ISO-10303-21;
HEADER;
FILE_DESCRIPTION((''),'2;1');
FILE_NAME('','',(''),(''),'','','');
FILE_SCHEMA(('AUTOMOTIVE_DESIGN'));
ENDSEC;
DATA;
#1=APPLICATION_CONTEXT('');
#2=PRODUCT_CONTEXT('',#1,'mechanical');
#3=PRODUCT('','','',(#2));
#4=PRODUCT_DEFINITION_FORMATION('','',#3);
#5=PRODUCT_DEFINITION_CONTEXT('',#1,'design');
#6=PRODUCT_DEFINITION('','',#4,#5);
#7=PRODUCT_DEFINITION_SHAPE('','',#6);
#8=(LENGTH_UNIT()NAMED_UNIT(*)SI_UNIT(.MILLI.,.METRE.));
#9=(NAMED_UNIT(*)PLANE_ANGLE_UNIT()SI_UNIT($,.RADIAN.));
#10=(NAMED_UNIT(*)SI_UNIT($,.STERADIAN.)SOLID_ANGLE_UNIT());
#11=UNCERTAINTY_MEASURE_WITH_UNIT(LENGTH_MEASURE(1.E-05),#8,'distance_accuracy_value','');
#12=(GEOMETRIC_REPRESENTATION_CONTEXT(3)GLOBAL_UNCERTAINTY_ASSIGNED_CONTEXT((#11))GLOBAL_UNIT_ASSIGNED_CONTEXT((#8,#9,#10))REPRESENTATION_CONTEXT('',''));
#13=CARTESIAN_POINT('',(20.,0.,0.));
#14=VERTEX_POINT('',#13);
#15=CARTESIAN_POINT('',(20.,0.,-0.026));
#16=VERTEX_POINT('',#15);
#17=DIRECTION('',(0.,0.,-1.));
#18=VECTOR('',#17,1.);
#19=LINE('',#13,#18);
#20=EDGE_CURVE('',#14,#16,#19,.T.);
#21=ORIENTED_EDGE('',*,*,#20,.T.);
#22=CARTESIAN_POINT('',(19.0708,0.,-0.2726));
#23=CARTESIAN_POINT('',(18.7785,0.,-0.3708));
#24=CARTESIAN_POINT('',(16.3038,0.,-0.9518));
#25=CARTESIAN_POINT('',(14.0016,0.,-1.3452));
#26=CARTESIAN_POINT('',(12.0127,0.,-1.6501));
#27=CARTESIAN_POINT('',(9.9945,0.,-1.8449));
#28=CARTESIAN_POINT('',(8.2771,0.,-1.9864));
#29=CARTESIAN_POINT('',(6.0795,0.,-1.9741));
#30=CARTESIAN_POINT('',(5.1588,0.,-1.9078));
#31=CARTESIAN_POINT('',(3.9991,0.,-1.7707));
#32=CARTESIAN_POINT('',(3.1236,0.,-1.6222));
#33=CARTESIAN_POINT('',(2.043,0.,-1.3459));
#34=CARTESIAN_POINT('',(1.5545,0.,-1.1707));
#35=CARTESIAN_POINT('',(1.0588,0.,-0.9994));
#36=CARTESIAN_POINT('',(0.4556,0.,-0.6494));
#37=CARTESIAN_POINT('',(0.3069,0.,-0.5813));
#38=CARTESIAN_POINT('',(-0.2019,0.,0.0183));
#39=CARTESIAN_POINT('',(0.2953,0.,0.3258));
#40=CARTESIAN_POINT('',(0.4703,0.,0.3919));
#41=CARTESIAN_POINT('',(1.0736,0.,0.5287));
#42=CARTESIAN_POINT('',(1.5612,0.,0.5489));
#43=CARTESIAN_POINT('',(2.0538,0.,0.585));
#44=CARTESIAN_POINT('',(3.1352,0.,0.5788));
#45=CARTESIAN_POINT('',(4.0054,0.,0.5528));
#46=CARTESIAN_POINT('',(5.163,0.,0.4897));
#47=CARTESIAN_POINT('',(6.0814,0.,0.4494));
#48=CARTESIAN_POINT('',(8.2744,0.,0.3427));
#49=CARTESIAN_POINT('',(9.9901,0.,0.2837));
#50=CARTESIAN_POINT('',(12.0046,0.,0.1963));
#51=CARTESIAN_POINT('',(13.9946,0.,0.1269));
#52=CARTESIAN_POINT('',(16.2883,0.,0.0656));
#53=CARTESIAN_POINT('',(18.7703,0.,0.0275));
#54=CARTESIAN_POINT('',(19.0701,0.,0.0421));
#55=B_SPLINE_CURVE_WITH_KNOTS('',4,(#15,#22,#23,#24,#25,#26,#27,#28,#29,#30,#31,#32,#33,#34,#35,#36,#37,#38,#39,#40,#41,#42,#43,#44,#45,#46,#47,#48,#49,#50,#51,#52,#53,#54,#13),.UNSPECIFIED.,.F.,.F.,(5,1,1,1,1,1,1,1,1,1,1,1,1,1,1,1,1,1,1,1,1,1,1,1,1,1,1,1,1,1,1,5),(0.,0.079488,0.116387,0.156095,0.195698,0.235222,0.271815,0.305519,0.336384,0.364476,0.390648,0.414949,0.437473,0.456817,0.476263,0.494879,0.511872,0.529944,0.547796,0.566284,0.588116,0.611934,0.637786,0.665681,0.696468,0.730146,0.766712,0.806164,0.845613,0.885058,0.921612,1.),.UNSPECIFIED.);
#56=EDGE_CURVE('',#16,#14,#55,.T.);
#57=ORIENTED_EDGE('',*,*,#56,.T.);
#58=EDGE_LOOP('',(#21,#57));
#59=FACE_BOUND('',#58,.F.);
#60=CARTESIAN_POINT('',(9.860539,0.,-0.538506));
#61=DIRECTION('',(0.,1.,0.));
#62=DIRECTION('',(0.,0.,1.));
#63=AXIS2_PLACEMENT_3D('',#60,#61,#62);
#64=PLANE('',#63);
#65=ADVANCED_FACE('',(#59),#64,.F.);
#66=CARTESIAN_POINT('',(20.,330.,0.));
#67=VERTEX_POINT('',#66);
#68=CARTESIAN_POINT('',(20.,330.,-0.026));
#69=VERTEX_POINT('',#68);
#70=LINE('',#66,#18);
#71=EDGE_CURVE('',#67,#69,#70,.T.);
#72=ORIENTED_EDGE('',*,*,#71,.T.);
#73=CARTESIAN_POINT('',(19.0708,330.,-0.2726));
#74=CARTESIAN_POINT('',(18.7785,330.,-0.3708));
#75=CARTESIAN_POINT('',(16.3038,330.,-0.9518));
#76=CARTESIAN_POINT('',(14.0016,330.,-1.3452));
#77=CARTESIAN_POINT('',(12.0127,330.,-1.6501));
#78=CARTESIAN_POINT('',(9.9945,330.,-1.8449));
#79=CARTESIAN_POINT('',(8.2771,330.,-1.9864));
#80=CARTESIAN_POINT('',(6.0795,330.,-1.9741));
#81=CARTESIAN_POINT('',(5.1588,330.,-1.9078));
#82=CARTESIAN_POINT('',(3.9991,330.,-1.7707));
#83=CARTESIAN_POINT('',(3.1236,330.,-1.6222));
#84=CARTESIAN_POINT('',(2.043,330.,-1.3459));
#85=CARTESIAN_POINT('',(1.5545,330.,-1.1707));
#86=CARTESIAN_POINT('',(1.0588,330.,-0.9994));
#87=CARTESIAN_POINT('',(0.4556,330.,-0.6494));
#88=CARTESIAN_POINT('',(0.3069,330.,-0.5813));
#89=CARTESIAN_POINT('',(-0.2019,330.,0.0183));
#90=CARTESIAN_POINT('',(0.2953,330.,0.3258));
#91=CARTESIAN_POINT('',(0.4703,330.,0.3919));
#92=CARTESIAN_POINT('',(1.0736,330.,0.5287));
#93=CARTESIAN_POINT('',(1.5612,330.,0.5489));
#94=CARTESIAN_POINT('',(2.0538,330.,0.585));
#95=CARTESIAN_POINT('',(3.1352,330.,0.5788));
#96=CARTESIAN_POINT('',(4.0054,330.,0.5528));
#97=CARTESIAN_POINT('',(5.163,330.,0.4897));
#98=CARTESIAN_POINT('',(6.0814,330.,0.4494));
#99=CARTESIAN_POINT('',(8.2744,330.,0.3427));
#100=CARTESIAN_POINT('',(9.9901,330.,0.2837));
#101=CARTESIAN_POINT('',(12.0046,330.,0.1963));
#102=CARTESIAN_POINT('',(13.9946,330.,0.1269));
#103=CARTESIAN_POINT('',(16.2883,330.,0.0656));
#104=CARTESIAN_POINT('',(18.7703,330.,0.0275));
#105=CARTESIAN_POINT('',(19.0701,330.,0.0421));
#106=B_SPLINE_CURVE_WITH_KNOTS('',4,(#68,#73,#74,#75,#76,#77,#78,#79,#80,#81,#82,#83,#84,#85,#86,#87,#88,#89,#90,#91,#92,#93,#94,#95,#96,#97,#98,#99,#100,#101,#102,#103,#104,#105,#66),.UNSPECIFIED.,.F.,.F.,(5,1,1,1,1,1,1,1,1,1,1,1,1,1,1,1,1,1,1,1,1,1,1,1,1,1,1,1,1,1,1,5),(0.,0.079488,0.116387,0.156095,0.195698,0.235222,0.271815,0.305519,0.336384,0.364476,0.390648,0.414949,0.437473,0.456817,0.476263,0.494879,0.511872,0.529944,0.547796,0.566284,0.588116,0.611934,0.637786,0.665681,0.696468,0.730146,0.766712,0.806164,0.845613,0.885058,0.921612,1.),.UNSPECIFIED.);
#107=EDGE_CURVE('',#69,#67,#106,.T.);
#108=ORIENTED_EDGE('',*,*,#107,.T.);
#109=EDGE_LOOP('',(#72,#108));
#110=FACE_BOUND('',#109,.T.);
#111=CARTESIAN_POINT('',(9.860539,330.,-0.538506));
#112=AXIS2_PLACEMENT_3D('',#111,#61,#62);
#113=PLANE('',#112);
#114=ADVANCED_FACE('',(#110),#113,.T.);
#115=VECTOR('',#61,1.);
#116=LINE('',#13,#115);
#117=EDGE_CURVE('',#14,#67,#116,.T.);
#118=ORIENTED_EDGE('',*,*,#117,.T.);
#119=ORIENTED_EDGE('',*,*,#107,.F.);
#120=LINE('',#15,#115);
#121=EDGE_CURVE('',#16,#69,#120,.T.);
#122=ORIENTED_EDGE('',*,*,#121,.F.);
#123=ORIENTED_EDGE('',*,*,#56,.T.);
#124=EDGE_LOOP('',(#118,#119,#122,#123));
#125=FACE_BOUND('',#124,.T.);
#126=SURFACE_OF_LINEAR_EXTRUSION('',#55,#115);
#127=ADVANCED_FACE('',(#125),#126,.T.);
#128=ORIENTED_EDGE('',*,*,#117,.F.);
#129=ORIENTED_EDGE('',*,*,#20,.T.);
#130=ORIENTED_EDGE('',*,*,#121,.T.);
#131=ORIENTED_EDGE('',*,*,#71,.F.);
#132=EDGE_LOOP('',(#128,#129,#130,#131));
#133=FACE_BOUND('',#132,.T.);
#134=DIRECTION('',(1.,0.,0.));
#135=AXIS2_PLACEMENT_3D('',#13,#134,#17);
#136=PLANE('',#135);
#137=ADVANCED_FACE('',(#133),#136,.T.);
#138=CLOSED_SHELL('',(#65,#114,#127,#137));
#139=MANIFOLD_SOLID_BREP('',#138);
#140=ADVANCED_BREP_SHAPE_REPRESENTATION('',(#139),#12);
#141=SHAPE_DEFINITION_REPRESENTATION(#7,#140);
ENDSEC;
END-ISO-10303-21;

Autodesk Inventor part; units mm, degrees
ref_plane "YZ Plane" through (0, 0, 0) normal (1, 0, 0) x (0, 1, 0)
ref_plane "XZ Plane" through (0, 0, 0) normal (0, 1, 0) x (-1, 0, 0)
ref_plane "XY Plane" through (0, 0, 0) normal (0, 0, 1) x (1, 0, 0)
sketch "Sketch1" plane through (0, 0, 0) normal (0, 1, 0) x (-1, 0, 0)
  spline S0 degree 4 poles (-20, -0.026) (-19.0708, -0.2726) (-18.7785, -0.3708) (-16.3038, -0.9518) (-14.0016, -1.3452) (-12.0127, -1.6501) (-9.9945, -1.8449) (-8.2771, -1.9864) (-6.0795, -1.9741) (-5.1588, -1.9078) (-3.9991, -1.7707) (-3.1236, -1.6222) (-2.043, -1.3459) (-1.5545, -1.1707) (-1.0588, -0.9994) (-0.4556, -0.6494) (-0.3069, -0.5813) (0.2019, 0.0183) (-0.2953, 0.3258) (-0.4703, 0.3919) (-1.0736, 0.5287) (-1.5612, 0.5489) (-2.0538, 0.585) (-3.1352, 0.5788) (-4.0054, 0.5528) (-5.163, 0.4897) (-6.0814, 0.4494) (-8.2744, 0.3427) (-9.9901, 0.2837) (-12.0046, 0.1963) (-13.9946, 0.1269) (-16.2883, 0.0656) (-18.7703, 0.0275) (-19.0701, 0.0421) (-20, 0) knots 0 0 0 0 0 0.079488 0.116387 0.156095 0.195698 0.235222 0.271815 0.305519 0.336384 0.364476 0.390648 0.414949 0.437473 0.456817 0.476263 0.494879 0.511872 0.529944 0.547796 0.566284 0.588116 0.611934 0.637786 0.665681 0.696468 0.730146 0.766712 0.806164 0.845613 0.885058 0.921612 1 1 1 1 1
  line L0 (-20, 0) -> (-20, -0.026)
  point P0 (0, 0)
  point P1 (-19, -0.294)
  point P2 (-18, -0.542)
  point P3 (-16, -0.978)
  point P4 (-14, -1.338)
  point P5 (-12, -1.628)
  point P6 (-10, -1.838)
  point P7 (-8, -1.96)
  point P8 (-6, -1.952)
  point P9 (-5, -1.882)
  point P10 (-4, -1.76)
  point P11 (-3, -1.578)
  point P12 (-2, -1.318)
  point P13 (-1.5, -1.152)
  point P14 (-1, -0.946)
  point P15 (-0.5, -0.678)
  point P16 (-0.25, -0.488)
  point P17 (0, 0)
  point P18 (-0.25, 0.286)
  point P19 (-0.5, 0.39)
  point P20 (-1, 0.498)
  point P21 (-1.5, 0.548)
  point P22 (-2, 0.572)
  point P23 (-3, 0.576)
  point P24 (-4, 0.548)
  point P25 (-5, 0.5)
  point P26 (-6, 0.452)
  point P27 (-8, 0.36)
  point P28 (-10, 0.28)
  point P29 (-12, 0.2)
  point P30 (-14, 0.13)
  point P31 (-16, 0.078)
  point P32 (-18, 0.044)
  point P33 (-19, 0.032)
sketch "Sketch2" plane through (0, 0, 0) normal (0, 0, 1) x (1, 0, 0)
  line L0 (0, 0) -> (0, 330)
  dimension "d0" = 330
sweep "Sweep1" add profiles "Sketch1" path "Sketch2"
properties part number "propeller mould"
